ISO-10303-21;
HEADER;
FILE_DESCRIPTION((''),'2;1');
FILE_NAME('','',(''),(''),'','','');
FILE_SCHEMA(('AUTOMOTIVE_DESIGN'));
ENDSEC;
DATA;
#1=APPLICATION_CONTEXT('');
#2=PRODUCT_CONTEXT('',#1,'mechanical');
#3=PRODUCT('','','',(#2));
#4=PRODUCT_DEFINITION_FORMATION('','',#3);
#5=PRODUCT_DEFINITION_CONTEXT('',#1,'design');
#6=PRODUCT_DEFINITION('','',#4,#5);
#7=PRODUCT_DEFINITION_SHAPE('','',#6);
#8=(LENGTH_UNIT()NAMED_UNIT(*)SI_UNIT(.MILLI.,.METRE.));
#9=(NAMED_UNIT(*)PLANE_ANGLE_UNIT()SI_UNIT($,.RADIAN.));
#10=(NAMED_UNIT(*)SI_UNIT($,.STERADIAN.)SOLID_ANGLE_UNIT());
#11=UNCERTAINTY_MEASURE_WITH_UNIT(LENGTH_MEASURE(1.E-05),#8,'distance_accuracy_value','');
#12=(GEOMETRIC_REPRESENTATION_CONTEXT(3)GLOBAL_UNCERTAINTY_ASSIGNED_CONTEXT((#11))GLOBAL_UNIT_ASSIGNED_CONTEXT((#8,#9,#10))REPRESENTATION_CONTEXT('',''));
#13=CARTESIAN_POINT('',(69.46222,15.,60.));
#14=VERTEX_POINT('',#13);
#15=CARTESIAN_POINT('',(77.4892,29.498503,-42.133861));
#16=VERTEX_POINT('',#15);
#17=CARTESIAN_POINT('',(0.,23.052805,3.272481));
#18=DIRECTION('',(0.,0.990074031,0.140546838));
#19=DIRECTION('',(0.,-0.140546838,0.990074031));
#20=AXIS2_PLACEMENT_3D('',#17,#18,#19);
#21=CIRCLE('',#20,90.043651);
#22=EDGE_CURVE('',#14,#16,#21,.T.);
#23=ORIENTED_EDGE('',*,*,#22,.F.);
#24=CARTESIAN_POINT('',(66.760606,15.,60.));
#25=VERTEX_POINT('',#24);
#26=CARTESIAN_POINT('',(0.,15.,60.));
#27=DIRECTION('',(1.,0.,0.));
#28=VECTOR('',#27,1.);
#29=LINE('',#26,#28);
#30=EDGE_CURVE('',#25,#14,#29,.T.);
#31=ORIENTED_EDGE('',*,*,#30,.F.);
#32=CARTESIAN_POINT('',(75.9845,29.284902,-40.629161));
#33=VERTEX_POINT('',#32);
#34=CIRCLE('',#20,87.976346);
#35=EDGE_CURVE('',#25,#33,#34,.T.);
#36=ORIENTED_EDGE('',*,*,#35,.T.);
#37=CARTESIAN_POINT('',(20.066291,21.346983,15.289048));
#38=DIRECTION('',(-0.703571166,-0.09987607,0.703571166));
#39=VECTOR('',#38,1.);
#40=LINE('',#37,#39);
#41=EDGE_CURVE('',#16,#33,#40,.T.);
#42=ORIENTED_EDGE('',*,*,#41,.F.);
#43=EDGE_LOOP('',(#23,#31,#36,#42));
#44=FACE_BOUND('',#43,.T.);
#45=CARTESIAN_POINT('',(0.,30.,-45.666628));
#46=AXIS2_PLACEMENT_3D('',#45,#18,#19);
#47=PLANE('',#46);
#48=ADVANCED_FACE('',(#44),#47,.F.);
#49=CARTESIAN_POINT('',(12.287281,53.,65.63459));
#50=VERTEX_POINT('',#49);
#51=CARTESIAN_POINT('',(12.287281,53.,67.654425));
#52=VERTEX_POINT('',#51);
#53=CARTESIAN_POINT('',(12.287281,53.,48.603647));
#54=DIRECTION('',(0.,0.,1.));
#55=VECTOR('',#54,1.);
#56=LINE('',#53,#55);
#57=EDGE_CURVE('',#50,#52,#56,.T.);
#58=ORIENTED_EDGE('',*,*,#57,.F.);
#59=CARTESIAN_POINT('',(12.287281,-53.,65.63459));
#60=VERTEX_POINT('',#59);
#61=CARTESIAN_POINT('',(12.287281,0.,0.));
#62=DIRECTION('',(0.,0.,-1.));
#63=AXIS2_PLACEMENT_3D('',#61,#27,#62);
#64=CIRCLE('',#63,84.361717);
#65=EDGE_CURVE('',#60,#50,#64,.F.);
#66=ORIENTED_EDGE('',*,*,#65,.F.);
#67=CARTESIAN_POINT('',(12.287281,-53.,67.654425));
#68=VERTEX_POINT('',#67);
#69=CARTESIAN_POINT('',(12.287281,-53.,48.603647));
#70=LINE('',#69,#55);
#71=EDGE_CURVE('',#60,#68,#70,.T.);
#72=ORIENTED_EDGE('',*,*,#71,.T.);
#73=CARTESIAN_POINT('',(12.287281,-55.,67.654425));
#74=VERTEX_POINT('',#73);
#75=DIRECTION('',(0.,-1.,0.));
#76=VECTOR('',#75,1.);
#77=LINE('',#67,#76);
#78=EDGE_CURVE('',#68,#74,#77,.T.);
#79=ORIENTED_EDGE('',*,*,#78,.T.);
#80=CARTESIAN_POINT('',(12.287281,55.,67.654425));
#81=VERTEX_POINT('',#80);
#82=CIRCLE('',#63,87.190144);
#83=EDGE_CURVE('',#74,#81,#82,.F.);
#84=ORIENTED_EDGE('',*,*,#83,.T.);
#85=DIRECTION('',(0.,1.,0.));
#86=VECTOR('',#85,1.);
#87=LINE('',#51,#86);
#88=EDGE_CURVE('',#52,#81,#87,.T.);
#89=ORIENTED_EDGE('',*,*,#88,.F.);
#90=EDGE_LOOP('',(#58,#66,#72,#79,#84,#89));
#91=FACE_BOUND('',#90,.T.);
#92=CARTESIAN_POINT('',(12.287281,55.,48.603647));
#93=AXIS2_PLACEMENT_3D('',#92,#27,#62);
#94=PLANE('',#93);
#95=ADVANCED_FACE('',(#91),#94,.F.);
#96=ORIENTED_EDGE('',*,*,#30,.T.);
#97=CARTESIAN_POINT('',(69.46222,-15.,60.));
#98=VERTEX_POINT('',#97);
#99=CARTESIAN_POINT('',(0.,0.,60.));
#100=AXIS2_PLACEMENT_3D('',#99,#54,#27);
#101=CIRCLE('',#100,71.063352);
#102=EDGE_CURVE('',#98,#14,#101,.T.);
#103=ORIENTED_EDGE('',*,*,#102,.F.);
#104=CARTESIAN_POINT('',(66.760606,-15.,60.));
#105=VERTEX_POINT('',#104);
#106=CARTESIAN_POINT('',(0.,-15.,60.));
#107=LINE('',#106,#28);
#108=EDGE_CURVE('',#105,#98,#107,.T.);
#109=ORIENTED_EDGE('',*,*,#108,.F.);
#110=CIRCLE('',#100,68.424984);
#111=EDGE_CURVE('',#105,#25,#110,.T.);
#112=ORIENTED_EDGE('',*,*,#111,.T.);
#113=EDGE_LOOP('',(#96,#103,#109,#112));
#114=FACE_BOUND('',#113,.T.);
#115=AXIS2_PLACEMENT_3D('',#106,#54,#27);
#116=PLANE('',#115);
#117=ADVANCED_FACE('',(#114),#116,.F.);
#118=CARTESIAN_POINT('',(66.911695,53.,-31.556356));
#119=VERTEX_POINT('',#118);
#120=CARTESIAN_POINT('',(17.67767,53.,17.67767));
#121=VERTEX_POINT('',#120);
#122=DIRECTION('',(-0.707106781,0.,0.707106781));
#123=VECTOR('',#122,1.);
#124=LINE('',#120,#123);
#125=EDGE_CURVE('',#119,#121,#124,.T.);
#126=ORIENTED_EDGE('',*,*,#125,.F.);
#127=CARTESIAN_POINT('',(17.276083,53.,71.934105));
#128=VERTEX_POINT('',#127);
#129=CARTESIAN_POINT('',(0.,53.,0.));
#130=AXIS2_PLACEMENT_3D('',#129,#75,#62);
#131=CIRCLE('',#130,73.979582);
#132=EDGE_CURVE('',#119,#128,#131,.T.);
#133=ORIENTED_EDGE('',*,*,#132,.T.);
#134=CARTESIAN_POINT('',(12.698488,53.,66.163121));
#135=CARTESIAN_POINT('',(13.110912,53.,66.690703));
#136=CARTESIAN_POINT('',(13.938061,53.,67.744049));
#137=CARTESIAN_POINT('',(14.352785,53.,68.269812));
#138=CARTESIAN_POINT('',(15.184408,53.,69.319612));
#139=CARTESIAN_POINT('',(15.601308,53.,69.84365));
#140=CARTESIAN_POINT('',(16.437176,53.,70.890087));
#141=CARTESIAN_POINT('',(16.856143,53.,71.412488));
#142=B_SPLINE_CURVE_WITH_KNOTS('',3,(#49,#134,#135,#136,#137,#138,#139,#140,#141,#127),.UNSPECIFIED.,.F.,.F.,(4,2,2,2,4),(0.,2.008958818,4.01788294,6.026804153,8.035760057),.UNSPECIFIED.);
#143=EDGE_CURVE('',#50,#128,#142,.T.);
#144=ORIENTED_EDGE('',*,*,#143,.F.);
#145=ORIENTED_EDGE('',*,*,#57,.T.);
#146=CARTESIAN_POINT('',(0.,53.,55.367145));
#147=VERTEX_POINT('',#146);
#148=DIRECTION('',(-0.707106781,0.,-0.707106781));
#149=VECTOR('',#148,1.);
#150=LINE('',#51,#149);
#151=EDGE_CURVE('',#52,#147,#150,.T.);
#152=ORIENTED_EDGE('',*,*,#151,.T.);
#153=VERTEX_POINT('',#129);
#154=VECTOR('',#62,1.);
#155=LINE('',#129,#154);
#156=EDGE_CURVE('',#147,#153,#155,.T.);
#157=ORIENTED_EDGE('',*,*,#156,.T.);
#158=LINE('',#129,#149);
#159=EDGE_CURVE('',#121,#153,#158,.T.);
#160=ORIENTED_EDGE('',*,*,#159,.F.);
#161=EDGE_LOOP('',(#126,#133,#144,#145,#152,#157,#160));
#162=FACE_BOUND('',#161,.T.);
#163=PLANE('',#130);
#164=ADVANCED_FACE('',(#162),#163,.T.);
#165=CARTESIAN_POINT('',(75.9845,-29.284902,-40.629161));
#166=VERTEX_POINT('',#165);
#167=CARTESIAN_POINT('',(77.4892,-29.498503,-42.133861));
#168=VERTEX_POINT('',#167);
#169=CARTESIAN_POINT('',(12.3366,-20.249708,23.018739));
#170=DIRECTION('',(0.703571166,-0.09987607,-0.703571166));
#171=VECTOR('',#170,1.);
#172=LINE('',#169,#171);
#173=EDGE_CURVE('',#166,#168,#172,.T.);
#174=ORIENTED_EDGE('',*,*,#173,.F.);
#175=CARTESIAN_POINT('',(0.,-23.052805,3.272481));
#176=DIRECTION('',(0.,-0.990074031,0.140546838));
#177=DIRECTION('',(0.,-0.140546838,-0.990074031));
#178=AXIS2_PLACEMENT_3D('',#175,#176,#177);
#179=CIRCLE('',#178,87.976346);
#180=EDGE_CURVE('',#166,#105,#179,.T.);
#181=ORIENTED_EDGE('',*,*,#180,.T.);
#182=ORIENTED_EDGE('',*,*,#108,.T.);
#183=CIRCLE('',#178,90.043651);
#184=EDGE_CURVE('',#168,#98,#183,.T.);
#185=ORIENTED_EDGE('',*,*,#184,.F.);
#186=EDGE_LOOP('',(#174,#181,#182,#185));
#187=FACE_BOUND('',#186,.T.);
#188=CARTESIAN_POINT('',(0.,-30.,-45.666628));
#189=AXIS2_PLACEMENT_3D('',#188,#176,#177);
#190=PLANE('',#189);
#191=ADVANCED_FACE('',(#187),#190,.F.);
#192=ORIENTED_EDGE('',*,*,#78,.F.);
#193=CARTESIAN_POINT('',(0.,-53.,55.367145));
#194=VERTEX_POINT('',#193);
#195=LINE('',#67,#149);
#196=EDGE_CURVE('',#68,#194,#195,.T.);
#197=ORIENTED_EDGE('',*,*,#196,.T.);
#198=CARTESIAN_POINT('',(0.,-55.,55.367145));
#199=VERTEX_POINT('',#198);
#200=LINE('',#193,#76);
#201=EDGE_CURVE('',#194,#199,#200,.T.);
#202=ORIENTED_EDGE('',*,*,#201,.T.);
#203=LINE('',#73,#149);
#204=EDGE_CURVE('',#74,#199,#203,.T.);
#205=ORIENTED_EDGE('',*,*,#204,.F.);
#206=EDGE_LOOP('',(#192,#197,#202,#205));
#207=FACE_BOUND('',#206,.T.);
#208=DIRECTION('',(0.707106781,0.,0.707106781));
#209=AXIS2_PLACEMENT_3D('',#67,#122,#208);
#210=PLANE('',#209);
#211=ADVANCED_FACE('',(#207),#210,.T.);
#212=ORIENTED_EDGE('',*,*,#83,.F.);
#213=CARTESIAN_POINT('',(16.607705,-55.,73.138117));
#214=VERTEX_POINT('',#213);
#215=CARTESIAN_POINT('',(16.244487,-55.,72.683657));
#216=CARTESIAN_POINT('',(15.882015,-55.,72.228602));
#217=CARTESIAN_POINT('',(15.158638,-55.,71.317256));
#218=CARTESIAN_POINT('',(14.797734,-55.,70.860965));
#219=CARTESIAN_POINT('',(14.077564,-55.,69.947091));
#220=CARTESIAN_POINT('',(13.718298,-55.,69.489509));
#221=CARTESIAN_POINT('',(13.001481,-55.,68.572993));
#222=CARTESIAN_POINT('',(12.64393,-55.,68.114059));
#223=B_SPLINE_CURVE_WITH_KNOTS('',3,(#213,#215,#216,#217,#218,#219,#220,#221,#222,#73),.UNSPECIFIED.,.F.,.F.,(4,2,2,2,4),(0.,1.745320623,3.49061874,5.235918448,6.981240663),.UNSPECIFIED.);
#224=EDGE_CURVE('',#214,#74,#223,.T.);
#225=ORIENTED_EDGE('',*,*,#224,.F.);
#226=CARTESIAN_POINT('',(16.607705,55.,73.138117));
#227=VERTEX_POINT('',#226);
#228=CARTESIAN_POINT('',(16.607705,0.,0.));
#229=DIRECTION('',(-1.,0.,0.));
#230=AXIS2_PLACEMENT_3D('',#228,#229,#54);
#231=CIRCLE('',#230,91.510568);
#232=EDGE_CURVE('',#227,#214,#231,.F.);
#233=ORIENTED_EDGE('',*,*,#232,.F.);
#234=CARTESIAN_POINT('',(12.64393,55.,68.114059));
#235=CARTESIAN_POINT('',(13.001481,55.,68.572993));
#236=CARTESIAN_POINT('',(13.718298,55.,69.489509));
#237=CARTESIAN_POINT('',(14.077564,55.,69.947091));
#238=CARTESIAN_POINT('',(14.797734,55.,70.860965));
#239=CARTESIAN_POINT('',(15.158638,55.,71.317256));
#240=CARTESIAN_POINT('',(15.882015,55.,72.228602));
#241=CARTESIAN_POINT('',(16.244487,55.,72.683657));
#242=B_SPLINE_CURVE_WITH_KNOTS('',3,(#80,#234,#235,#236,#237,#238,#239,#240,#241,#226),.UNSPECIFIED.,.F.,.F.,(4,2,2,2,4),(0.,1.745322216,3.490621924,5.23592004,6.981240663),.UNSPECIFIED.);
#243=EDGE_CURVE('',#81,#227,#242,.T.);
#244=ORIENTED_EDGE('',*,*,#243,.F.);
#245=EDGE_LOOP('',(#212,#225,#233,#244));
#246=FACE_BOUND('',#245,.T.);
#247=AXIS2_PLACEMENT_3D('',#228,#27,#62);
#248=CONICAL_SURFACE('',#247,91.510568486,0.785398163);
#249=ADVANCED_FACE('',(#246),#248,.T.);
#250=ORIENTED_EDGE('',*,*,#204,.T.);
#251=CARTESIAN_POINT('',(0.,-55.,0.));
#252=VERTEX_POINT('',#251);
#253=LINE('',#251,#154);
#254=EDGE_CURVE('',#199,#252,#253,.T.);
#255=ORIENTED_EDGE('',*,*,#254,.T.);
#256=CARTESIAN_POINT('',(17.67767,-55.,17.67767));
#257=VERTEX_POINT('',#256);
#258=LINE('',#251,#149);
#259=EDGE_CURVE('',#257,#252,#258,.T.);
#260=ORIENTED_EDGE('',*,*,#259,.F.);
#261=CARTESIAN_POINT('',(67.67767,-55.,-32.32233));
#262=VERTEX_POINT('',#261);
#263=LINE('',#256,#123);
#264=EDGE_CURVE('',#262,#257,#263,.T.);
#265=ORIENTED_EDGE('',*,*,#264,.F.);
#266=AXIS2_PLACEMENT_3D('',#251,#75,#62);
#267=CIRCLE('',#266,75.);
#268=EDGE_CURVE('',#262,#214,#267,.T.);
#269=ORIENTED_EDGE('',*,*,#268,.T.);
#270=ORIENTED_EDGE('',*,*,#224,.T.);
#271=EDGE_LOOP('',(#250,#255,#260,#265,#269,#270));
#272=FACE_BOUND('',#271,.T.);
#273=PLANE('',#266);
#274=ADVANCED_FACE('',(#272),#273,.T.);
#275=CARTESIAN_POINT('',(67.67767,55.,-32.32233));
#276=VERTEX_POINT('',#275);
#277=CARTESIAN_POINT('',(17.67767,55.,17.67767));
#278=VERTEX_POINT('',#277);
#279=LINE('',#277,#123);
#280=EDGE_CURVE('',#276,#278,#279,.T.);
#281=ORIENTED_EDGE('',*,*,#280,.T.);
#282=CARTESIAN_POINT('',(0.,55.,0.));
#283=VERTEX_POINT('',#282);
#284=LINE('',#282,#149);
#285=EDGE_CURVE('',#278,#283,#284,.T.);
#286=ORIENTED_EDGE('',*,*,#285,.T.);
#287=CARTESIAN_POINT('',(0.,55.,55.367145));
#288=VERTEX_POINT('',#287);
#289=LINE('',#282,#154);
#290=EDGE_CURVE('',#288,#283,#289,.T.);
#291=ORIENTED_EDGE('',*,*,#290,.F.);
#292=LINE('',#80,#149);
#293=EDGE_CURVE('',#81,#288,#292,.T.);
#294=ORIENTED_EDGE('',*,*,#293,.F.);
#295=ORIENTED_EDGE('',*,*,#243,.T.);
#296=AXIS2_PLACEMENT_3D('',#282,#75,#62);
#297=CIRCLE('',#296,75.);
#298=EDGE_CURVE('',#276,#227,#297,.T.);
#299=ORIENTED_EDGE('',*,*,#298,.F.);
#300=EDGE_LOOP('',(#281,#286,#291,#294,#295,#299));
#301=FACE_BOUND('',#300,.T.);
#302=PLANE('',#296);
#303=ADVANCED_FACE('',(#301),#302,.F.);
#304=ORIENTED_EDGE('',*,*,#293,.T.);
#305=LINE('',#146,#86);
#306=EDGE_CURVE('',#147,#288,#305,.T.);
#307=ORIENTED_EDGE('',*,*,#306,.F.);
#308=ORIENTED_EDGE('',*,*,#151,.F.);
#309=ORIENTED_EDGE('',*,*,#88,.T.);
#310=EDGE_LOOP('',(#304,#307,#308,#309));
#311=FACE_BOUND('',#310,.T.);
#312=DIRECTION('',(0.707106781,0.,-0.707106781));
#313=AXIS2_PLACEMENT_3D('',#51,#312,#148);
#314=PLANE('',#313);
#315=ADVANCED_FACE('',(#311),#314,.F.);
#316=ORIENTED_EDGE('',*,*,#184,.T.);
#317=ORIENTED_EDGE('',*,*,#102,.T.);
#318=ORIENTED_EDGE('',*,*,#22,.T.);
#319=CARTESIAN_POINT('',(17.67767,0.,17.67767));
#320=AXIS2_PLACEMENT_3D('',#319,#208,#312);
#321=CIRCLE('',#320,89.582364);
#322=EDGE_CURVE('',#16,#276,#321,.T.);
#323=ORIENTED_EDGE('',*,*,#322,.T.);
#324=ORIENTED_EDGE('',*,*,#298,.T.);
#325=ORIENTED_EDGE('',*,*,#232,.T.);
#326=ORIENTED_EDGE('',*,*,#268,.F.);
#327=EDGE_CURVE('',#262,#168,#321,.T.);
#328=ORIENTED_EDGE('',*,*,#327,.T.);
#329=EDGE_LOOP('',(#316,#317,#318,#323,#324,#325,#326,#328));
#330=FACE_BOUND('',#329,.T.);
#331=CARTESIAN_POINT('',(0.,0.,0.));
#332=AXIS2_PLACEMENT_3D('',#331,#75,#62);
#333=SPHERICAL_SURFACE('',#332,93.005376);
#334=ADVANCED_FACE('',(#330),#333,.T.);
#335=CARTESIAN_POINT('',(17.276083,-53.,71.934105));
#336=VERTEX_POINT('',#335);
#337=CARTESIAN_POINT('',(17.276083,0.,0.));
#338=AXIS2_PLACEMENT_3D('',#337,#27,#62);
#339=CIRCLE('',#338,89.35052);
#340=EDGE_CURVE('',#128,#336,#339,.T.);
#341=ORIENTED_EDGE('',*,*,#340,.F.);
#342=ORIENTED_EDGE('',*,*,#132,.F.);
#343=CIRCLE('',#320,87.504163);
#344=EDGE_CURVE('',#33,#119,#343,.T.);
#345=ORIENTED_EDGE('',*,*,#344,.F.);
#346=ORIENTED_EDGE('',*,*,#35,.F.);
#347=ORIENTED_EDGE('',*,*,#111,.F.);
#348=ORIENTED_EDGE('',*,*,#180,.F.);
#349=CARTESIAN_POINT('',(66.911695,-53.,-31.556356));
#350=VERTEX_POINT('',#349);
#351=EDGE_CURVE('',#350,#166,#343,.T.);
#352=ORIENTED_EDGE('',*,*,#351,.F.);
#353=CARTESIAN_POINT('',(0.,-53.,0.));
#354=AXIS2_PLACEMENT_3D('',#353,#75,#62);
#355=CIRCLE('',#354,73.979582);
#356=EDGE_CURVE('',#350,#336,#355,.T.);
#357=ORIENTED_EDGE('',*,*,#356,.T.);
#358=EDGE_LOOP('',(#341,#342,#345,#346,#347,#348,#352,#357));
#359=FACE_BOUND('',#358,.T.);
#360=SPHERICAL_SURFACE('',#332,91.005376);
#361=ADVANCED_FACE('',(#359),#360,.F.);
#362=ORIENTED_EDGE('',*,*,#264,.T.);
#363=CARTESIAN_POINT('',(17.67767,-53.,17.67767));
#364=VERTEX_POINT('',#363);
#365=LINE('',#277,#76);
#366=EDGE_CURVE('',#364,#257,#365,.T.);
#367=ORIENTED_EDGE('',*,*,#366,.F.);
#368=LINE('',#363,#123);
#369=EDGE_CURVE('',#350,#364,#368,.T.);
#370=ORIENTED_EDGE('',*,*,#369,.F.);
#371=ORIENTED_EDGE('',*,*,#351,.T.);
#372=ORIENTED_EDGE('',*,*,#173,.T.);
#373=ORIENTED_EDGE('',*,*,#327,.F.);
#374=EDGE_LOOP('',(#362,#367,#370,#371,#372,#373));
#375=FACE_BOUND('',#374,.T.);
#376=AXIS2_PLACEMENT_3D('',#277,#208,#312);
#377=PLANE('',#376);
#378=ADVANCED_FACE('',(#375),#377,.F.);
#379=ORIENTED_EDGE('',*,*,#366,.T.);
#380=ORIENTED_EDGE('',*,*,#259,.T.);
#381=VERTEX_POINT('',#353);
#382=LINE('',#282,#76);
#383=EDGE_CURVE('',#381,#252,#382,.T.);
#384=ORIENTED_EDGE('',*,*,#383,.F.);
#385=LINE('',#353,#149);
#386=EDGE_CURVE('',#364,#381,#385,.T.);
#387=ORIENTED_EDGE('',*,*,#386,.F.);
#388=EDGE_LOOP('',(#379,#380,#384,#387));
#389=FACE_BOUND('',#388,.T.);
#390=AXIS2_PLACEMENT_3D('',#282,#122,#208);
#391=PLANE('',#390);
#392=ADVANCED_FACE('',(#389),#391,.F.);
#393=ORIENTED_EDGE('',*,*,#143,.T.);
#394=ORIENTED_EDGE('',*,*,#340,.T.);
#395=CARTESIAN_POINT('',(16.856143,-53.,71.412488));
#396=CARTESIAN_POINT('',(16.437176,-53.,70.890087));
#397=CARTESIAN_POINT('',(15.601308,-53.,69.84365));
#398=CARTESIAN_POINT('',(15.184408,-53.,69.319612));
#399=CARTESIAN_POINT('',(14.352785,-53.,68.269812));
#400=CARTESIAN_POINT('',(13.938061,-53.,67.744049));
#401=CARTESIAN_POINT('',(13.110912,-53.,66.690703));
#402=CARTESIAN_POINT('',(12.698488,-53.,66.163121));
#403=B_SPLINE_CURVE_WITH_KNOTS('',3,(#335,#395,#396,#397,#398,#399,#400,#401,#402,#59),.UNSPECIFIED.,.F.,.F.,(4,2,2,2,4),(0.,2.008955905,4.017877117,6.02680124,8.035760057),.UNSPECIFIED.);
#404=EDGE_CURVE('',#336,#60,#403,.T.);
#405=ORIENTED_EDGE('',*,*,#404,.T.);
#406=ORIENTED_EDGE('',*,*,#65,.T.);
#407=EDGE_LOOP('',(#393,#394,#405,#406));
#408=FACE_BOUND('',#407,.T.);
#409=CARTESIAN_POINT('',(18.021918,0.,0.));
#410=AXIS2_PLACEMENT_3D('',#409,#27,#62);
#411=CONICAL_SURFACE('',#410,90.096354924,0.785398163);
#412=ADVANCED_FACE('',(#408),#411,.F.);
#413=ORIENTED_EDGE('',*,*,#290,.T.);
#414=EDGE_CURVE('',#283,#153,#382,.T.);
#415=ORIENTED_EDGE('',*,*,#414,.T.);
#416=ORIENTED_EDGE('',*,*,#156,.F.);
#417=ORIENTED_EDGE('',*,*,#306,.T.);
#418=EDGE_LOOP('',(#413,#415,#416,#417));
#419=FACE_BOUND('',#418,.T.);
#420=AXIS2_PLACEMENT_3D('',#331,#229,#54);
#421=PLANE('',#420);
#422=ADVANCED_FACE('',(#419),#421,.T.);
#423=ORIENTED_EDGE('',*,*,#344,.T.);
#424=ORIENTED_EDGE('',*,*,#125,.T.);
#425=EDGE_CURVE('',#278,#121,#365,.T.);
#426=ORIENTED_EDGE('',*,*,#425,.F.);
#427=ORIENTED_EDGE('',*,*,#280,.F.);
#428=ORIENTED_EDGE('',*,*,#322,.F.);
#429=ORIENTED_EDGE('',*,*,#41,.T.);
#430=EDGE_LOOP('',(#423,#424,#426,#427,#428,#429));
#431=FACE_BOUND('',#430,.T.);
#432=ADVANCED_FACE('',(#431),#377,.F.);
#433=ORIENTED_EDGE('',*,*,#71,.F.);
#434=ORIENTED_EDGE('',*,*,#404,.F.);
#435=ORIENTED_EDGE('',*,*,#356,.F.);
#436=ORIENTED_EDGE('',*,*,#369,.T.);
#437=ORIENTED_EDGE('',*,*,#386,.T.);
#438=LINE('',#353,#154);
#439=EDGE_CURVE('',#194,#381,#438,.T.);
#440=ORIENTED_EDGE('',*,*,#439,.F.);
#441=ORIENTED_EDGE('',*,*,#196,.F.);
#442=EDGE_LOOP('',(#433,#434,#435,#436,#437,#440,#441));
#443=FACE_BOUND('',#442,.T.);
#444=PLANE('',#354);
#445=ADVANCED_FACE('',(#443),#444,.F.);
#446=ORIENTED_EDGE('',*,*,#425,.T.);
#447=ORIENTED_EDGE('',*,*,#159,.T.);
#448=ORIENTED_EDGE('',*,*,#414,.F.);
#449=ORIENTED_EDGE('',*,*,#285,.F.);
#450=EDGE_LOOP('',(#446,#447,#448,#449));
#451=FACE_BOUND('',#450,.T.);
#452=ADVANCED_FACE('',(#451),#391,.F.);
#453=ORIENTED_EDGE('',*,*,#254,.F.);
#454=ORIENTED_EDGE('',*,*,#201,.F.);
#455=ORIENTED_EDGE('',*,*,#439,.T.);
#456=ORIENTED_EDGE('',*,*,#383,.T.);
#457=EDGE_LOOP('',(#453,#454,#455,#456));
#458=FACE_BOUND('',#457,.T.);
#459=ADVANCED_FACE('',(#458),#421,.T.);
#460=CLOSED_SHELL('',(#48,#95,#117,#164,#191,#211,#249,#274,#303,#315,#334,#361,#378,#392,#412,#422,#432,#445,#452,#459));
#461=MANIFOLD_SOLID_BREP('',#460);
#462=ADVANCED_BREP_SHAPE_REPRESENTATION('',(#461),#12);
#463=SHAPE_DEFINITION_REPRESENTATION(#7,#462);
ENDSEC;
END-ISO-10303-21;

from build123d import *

# Parameters (mm, degrees)
REVOLVE1_ANGLE      = 180
CUT_EXTRUDE1_DEPTH  = 172.464281995
CUT_EXTRUDE2_DEPTH  = 147.710676959
CHAMFER1_SIZE       = 5
SHELL1_T            = -2
BOSS_EXTRUDE1_DEPTH = 2


with BuildPart() as part:
    # Sketch1 → Revolve1 (revolve)
    with BuildSketch(Plane(origin=(0, 0, 0), x_dir=(0, 0, -1), z_dir=(1, 0, 0))):
        with BuildLine():
            Line((0, -55), (0, 55))
            Line((0, 55), (-75, 55))
            ThreePointArc((-75, 55), (-93.005376189, 0), (-75, -55))
            Line((-75, -55), (0, -55))
        make_face()
    revolve(axis=Axis((0, -55, 0), (0, 1, 0)), revolution_arc=REVOLVE1_ANGLE)

    # Sketch2 → Cut-Extrude1 (cut, through all)
    with BuildSketch(Plane.XZ.offset(55)):
        Polygon((0, 0), (0, 40), (12.287280664, 48.603646545), (12.287280664, 112.259604339), (-94.581934809, 112.259604339), (-94.581934809, -108.477643872), (97.057130945, -108.477643872), (97.057130945, -61.701791886), (17.67766953, 17.67766953), align=None)
    extrude(amount=-CUT_EXTRUDE1_DEPTH, mode=Mode.SUBTRACT)

    # Sketch3 → Cut-Extrude2 (cut, through all)
    with BuildSketch(Plane(origin=(100, 0, 0), x_dir=(0, 0, -1), z_dir=(1, 0, 0))):
        Polygon((-60, -15), (-60, 15), (45.666627767, 30), (45.666627767, -30), align=None)
    extrude(amount=-CUT_EXTRUDE2_DEPTH, mode=Mode.SUBTRACT)

    # Chamfer1
    # the kernel refuses this chamfer: 5, 4.450979534 mm, written as the material it takes off along each edge
    with BuildSketch(Plane(origin=(12.287280664, 0, 0), x_dir=(0, 0.7023997796774999, 0.7117826560889214), z_dir=(0, 0.7117826560889214, -0.7023997796774999))) as chamfer1_piece_1:
        with BuildLine():
            Line((92.190144451 - CHAMFER1_SIZE, 0), (91.510568486, 4.320424035))
            ThreePointArc((91.510568486, 4.320424035), (91.866596239, 2.222319448), (92.190144451, 0))
            Line((92.190144451, 0), (92.190144451 - CHAMFER1_SIZE, 0))
        make_face()
    revolve(axis=Axis((12.287280664, 0, 0), (1, 0, 0)), revolution_arc=89.239714317, mode=Mode.SUBTRACT)

    # Shell1
    shell1_openings = [part.faces().sort_by_distance(p)[0] for p in [
        (0, -37.799975499, 20.551470825),
        (44.318791783, -39.564539913, -8.963452724),
        (12.287280664, 0, 66.554150501),
        (8.951756718, -38.623299359, 8.951756718),
        (6.176749303, -36.112578818, 44.325006424),
        (8.951756718, 38.623299359, 8.951756718),
        (44.318791783, 39.564539913, -8.963452724),
        (6.176749303, 36.112578818, 44.325006424),
        (0, 37.799975499, 20.551470825),
        (41.411625019, 0, 60),
        (50.400096072, 20.67683416, 20.009871862),
        (50.400096072, -20.67683416, 20.009871862),
    ]]
    offset(amount=SHELL1_T, openings=shell1_openings)

    # Sketch4 → Boss-Extrude1 (add)
    with BuildSketch(Plane.XZ.offset(55)):
        Polygon((12.287280664, 67.654425497), (0, 55.367144833), (0, 40), (12.287280664, 48.603646545), align=None)
    boss_extrude1 = extrude(amount=-BOSS_EXTRUDE1_DEPTH)

    # Mirror1: Boss-Extrude1 across plane
    add(boss_extrude1.mirror(Plane.ZX))


solid = part.part
